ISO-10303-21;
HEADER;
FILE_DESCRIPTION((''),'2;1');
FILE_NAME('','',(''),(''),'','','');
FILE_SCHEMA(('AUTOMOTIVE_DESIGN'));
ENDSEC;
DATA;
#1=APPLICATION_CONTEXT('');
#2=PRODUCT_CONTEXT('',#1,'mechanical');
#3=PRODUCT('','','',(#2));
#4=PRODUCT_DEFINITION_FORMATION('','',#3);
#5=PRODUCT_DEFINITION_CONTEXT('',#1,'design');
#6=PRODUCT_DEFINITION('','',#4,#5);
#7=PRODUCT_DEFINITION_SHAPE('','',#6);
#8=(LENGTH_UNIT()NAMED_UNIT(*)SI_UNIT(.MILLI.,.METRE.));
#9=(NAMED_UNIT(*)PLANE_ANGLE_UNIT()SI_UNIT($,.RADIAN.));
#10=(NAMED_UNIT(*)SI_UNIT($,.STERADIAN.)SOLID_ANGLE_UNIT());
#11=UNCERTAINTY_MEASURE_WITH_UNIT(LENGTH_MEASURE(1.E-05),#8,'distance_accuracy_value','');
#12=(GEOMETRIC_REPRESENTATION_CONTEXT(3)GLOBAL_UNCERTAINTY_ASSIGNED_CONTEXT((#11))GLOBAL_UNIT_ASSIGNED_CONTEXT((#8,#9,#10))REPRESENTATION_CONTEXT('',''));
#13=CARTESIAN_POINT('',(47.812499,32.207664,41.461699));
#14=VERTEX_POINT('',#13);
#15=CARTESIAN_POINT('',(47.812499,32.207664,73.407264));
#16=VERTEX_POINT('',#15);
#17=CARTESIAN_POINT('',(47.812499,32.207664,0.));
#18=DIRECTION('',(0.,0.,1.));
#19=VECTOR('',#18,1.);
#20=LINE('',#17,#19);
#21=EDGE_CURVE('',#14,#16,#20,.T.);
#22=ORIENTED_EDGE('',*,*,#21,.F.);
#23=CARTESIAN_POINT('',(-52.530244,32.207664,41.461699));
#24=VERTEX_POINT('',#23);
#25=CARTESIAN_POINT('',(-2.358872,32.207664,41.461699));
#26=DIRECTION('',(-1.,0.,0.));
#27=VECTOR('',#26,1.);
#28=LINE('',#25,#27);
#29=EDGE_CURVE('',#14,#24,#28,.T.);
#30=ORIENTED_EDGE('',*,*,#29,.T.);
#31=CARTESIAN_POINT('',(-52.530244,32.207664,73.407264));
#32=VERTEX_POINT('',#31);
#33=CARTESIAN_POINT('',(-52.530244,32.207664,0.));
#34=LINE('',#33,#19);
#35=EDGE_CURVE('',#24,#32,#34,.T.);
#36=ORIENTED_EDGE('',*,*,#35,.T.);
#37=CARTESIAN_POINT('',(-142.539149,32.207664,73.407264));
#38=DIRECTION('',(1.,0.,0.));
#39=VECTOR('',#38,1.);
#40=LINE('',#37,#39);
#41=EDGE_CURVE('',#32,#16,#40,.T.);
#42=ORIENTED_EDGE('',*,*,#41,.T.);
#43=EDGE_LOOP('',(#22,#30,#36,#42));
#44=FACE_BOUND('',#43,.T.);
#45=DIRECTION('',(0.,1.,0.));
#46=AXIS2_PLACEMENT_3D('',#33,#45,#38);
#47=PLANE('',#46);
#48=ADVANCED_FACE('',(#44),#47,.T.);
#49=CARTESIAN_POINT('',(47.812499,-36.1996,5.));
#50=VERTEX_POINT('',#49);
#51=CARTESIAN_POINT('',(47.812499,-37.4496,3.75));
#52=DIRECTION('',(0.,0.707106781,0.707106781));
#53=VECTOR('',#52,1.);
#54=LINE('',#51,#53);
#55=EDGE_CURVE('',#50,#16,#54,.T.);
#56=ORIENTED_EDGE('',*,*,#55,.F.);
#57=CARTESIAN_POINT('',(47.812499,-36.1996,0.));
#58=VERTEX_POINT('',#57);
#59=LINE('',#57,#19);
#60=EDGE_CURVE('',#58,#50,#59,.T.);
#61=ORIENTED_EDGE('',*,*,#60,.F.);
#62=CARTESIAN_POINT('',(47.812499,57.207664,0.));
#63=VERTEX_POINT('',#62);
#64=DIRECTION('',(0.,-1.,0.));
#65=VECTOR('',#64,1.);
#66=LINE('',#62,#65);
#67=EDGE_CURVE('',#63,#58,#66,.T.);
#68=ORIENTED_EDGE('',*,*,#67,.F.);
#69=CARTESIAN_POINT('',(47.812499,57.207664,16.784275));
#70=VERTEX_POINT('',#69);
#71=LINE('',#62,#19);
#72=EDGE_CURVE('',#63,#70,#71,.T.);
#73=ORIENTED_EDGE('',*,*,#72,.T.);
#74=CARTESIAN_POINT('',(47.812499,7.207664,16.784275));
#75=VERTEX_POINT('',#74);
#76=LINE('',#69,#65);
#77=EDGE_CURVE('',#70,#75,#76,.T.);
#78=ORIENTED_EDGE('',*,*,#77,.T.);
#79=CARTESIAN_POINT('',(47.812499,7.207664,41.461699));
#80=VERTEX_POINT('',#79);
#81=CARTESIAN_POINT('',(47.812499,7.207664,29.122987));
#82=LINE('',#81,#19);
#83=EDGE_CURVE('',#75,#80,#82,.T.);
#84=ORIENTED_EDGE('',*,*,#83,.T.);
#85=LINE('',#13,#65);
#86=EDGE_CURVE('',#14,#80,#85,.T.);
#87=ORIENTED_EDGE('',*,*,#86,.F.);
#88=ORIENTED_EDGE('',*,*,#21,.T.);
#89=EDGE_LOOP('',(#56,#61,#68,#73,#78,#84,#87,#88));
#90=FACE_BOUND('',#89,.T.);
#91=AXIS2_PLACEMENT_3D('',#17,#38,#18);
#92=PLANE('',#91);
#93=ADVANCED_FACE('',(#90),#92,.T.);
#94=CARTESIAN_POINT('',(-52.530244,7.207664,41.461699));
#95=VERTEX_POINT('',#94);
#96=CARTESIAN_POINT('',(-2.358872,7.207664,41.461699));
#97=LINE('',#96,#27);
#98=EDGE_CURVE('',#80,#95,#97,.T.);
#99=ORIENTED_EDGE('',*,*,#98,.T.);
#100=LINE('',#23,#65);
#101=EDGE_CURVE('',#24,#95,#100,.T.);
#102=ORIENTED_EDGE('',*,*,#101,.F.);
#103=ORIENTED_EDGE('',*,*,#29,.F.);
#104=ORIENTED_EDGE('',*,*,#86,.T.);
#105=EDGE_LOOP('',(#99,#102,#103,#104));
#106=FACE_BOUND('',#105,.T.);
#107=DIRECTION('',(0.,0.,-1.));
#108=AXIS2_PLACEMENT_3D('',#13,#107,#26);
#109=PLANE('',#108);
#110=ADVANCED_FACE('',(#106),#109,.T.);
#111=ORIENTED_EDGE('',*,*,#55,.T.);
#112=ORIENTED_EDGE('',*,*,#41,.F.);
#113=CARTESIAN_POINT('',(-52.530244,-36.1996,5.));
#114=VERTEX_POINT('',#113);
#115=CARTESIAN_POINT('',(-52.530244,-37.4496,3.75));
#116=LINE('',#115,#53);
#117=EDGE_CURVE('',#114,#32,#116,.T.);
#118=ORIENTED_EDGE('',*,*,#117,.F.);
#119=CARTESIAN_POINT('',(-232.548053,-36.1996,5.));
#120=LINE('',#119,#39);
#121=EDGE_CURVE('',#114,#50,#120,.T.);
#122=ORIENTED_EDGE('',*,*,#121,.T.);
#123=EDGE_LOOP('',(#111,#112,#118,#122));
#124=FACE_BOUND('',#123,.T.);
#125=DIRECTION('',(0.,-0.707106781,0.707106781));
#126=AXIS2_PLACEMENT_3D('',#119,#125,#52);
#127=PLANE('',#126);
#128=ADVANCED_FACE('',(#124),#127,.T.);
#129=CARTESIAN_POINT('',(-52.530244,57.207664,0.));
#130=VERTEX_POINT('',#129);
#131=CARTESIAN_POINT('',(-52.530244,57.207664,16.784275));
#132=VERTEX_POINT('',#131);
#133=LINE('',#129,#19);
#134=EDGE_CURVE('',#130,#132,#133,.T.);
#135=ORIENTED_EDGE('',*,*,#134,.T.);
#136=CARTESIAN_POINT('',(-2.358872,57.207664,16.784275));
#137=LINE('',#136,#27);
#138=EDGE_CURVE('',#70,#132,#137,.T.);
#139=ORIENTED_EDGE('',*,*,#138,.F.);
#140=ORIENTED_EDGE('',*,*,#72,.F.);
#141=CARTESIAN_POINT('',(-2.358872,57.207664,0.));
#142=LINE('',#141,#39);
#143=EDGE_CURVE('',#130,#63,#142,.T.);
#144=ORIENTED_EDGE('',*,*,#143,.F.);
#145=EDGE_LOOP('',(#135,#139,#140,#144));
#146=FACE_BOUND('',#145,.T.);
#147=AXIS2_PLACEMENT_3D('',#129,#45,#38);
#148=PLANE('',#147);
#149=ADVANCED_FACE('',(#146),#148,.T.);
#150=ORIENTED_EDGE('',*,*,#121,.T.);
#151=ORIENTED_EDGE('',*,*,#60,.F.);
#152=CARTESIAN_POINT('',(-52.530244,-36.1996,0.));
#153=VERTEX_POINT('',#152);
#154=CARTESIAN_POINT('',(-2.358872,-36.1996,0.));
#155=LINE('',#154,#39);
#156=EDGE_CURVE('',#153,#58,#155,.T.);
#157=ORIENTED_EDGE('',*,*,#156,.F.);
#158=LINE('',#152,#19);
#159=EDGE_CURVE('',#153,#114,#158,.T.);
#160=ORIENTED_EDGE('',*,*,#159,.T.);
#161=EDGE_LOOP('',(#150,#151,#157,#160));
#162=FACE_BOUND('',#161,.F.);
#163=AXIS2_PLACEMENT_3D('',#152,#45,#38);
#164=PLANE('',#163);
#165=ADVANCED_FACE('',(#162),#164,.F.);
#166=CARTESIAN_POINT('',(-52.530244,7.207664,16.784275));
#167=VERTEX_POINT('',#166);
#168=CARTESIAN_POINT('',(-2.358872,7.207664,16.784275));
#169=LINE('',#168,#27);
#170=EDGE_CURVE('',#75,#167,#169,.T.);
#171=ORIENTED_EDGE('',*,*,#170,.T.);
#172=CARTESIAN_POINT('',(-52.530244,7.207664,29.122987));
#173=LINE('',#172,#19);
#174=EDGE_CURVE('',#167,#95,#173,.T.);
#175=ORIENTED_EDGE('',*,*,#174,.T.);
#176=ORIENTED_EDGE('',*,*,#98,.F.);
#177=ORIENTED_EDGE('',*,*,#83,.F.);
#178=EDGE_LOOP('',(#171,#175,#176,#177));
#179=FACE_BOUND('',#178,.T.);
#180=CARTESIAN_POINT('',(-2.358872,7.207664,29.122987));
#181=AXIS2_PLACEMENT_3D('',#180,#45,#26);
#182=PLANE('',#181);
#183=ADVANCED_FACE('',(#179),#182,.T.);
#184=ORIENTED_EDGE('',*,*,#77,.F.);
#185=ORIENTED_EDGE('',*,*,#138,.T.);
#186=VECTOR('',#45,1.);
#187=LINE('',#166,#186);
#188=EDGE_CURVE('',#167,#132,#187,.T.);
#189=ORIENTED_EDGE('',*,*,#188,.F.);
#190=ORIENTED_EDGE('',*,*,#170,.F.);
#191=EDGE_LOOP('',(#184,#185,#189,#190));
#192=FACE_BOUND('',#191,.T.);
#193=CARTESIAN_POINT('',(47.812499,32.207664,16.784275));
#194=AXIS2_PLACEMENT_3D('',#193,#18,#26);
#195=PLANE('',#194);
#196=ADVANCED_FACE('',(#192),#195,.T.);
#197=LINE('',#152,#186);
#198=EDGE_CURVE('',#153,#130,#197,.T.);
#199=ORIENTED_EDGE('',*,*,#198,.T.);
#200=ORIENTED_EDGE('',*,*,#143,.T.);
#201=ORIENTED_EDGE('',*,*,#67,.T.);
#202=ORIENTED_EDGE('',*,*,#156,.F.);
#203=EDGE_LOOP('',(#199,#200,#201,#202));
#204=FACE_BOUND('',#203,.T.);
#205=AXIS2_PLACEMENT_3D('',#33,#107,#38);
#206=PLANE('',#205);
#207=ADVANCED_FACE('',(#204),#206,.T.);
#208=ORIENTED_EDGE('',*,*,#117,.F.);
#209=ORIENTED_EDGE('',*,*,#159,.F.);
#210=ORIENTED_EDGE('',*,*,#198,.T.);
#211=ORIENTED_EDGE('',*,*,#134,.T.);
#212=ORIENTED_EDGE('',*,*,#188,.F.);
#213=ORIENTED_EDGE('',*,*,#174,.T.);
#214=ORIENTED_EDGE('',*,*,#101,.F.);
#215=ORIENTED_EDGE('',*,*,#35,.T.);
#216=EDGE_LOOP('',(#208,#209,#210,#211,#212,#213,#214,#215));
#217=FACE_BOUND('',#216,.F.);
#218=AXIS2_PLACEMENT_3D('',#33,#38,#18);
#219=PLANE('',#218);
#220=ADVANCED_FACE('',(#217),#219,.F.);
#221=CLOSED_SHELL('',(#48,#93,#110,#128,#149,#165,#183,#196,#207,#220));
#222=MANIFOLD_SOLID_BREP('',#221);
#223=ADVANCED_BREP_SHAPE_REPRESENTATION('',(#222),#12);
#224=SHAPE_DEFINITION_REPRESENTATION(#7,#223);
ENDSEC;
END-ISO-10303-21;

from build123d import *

# Parameters (mm, degrees)
F0_W        = 100.3427430987
F0_H        = 68.4072636068
F1_DEPTH    = 75
F2_T1_DEPTH = 460.378361414
F3_W        = 100.3427430987
F3_H        = 24.6774237603
F4_DEPTH    = 25
F5_DEPTH    = 25


# Not quite as in the source:
# - a fillet or chamfer that OpenCascade refuses, or shapes differently, is made with other operations: its cross-section is extruded or revolved along the edge and cut away or added


with BuildPart() as f1:
    # F0 (on Top) → F1 (new body)
    with BuildSketch(Plane.XY):
        with Locations((-2.3588724434, -1.9959677011)):
            Rectangle(F0_W, F0_H)
    extrude(amount=F1_DEPTH)

    # F2: chamfer of 70 on 1 edges, made by hand

    # F2_s2 → F2_t1 (cut)
    with BuildSketch(Plane.YZ.offset(-232.5480531504)):
        Polygon((-36.1995995045, 5), (33.8004004955, 75), (-36.1995995045, 75), align=None)
    extrude(amount=F2_T1_DEPTH, mode=Mode.SUBTRACT)

    # F3 (on face) → F4 (cut)
    with BuildSketch(Plane(origin=(0, 32.2076641023, 0), x_dir=(-1, 0, 0), z_dir=(0, 1, 0))):
        with Locations((2.3588724434, 29.1229868308)):
            Rectangle(F3_W, F3_H)
    extrude(amount=-F4_DEPTH, mode=Mode.SUBTRACT)

    # F5 (add): a face of the model
    f5_faces = [f1.faces().sort_by_distance(p)[0] for p in [
        (-2.3588724434, 32.2076641023, 8.3921374753),
    ]]
    extrude(f5_faces, amount=F5_DEPTH)


solid = f1.part
